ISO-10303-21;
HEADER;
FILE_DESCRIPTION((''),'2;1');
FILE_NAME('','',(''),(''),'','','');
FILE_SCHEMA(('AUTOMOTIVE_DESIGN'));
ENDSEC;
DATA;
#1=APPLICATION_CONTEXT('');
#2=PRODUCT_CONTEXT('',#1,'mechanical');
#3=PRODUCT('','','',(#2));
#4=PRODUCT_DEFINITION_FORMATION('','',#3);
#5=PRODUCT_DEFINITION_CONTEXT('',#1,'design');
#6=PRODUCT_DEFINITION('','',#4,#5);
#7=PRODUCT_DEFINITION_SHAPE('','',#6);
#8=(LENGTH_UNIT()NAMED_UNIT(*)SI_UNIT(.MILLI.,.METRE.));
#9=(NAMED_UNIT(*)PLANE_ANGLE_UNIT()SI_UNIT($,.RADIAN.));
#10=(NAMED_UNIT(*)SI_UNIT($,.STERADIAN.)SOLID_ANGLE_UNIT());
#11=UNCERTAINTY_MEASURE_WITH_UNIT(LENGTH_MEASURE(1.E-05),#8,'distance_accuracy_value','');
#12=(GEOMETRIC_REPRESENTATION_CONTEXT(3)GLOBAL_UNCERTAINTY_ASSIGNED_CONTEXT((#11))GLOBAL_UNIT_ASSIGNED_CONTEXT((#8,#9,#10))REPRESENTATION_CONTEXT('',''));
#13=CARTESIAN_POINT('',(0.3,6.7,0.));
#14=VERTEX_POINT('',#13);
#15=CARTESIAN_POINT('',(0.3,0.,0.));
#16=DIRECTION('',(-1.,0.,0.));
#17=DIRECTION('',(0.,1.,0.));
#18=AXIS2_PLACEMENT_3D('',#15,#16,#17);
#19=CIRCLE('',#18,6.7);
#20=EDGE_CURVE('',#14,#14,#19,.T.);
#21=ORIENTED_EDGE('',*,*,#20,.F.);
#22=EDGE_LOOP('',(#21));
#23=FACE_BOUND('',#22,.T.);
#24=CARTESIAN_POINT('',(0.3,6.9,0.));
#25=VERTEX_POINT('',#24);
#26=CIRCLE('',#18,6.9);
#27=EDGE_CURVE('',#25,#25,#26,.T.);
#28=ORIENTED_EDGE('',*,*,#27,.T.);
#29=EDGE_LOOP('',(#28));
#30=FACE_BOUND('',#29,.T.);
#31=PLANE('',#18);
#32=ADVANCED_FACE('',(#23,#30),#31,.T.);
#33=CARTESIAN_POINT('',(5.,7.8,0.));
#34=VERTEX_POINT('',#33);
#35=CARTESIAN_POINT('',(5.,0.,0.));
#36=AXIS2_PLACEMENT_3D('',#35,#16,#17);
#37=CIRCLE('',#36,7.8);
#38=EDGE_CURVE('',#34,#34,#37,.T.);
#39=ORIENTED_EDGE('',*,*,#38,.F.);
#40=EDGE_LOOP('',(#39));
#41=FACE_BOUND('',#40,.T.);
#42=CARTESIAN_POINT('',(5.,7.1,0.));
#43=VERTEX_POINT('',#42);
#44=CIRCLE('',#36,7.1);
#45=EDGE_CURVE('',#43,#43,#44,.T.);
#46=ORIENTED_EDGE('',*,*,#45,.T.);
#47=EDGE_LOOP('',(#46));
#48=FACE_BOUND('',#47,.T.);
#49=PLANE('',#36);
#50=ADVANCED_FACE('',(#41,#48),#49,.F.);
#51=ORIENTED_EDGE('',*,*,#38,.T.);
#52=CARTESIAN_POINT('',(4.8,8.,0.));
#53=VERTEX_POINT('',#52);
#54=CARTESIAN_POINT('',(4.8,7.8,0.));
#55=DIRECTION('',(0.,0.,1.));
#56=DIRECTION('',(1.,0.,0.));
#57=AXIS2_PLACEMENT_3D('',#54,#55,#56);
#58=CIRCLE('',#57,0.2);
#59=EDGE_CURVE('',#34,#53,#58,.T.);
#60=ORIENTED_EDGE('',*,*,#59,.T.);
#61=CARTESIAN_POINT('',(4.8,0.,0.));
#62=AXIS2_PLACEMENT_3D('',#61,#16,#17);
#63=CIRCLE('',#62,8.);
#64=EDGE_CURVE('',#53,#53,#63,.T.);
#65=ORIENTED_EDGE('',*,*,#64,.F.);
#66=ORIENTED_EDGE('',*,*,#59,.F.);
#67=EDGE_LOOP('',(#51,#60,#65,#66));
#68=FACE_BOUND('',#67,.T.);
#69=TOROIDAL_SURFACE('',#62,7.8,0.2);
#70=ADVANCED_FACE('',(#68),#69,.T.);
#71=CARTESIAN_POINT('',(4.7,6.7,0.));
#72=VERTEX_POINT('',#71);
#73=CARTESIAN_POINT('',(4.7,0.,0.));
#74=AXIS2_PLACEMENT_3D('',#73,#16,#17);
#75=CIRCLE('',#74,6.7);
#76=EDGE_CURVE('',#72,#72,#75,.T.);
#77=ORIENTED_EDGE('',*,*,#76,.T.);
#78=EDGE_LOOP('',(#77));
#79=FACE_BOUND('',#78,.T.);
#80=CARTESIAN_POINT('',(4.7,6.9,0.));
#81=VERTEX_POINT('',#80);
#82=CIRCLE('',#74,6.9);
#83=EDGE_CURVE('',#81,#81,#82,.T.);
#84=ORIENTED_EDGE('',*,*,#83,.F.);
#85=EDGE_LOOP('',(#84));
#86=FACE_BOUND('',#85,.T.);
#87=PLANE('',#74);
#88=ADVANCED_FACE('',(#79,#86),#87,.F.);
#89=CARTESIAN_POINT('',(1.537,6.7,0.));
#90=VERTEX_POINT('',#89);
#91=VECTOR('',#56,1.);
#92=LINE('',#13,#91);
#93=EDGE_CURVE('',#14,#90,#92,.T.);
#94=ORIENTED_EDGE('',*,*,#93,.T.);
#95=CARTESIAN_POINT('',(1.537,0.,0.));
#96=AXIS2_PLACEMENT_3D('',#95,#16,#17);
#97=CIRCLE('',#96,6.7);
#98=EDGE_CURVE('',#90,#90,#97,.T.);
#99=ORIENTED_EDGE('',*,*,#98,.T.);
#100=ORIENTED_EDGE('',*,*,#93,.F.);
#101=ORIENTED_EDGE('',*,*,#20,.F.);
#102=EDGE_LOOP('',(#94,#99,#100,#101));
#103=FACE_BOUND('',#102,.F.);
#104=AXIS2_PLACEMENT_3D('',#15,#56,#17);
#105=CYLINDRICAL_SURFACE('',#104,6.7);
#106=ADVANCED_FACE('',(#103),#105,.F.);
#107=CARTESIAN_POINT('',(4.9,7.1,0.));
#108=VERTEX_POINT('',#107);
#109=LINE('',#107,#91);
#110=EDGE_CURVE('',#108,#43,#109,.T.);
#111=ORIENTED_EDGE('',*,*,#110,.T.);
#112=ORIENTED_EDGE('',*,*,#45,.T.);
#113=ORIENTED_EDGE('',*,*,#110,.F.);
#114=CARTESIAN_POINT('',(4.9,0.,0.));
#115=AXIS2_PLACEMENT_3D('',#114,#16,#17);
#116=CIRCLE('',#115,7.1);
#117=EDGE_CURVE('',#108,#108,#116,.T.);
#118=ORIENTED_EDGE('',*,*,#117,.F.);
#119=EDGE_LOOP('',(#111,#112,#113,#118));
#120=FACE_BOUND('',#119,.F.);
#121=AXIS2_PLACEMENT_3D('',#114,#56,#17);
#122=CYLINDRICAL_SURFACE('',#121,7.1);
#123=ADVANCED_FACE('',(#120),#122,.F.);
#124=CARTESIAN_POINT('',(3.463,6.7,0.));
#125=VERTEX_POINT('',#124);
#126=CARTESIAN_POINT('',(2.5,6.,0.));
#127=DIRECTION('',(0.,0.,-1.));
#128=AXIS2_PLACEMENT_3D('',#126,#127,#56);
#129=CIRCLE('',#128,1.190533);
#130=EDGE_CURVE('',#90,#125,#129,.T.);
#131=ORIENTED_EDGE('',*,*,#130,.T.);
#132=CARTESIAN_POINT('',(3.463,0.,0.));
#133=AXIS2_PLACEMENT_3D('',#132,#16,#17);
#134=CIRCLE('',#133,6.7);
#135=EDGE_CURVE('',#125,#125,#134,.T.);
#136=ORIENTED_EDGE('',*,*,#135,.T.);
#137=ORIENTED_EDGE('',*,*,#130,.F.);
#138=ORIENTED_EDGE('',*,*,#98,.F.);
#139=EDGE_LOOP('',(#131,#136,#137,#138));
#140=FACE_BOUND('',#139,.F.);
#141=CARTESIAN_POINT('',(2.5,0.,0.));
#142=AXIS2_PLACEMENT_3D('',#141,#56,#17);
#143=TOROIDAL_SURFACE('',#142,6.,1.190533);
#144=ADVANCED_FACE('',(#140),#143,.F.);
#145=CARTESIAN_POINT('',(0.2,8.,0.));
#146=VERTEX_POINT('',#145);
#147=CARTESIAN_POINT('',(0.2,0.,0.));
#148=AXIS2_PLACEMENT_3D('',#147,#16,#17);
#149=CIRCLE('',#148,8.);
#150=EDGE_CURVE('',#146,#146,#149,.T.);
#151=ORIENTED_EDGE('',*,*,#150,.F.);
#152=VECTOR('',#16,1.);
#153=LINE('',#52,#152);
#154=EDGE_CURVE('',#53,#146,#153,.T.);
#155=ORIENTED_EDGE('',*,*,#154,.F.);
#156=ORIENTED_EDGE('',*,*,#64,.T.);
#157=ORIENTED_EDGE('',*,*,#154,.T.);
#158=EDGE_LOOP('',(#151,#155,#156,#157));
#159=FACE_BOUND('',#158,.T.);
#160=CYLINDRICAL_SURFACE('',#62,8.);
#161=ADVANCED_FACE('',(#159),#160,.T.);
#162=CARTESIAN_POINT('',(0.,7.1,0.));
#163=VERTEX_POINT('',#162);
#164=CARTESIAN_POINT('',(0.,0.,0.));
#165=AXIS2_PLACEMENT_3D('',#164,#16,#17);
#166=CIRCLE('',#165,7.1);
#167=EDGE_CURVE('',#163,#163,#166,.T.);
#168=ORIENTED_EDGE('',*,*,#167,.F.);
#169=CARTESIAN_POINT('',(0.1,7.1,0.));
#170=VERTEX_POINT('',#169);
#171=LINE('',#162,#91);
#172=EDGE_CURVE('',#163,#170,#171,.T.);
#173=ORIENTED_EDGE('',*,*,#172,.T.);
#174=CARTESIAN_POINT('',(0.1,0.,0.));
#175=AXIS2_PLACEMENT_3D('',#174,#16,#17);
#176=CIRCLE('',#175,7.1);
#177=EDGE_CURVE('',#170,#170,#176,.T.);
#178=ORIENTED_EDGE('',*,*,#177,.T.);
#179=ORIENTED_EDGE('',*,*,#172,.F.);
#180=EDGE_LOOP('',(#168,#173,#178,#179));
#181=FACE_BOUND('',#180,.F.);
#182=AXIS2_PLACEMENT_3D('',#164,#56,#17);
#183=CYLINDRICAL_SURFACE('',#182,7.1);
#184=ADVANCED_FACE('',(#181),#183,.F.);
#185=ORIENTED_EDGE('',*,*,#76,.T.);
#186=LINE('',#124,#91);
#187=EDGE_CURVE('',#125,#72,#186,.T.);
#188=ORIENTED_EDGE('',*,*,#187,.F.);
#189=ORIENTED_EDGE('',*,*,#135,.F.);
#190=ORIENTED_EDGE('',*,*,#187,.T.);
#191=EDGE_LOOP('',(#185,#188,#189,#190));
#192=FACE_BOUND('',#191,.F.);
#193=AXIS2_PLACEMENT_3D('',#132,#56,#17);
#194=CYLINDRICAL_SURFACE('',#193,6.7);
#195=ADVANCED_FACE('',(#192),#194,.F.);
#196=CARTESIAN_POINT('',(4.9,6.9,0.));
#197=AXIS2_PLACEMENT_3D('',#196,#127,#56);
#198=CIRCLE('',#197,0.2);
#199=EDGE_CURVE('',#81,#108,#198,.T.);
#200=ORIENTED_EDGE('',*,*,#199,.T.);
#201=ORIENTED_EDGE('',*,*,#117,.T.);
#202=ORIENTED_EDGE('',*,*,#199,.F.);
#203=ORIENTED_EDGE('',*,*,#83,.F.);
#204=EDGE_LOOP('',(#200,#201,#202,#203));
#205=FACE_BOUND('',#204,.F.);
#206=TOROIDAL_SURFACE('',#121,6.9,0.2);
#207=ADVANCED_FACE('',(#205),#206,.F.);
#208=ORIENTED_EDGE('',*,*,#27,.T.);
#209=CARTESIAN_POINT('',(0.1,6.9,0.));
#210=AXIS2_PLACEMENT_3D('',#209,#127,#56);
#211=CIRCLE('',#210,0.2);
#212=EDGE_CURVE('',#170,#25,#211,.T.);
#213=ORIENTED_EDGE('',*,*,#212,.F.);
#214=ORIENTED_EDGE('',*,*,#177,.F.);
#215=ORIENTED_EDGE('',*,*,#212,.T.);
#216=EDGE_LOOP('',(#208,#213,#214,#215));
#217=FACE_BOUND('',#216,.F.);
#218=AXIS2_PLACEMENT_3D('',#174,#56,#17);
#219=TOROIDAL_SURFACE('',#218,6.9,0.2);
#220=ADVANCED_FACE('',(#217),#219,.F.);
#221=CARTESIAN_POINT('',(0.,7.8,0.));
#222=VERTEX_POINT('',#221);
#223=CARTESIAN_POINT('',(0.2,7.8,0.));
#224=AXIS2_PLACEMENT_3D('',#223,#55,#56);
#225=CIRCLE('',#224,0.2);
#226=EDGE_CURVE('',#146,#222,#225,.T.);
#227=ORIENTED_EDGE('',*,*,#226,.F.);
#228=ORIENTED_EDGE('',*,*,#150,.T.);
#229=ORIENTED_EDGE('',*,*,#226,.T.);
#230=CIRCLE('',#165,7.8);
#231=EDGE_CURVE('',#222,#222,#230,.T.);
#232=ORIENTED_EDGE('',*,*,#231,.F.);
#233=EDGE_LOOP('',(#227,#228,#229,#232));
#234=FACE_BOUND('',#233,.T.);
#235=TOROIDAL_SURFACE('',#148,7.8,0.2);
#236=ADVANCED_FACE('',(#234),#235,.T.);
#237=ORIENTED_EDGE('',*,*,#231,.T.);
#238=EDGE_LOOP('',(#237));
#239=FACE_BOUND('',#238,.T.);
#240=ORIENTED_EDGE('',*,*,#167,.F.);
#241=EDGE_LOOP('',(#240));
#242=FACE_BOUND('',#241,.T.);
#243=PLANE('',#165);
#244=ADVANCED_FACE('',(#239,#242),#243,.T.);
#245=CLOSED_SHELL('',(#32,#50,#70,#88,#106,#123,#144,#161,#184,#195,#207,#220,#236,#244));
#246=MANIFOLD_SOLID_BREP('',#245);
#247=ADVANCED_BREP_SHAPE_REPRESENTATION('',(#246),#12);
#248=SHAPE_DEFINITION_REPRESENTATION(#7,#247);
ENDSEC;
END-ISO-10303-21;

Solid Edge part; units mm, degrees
sketch "Sketch1" plane through (0, 0, 0) normal (0, 0, 1) x (1, 0, 0)
  line L0 (0, 7.8) -> (0, 7.1)
  line L1 (0, 7.1) -> (0.1, 7.1)
  arc A0 (0.1, 7.1) -> (0.3, 6.9) centre (0.1, 6.9) cw
  line L2 (0.3, 6.9) -> (0.3, 6.7)
  line L3 (0.3, 6.7) -> (1.537, 6.7)
  arc A1 (1.537, 6.7) -> (3.463, 6.7) centre (2.5, 6) cw
  line L4 (3.463, 6.7) -> (4.7, 6.7)
  line L5 (4.7, 6.7) -> (4.7, 6.9)
  arc A2 (4.7, 6.9) -> (4.9, 7.1) centre (4.9, 6.9) cw
  line L6 (4.9, 7.1) -> (5, 7.1)
  line L7 (5, 7.1) -> (5, 7.8)
  arc A3 (5, 7.8) -> (4.8, 8) centre (4.8, 7.8) ccw
  line L8 (4.8, 8) -> (0.2, 8)
  arc A4 (0.2, 8) -> (0, 7.8) centre (0.2, 7.8) ccw
revolve "RevolvedProtrusion1" add sketch "Sketch1" angle 360 about axis through (50, 0, 0) along (-1, 0, 0)
properties part number "SKF_628/8-2RS1_or"
